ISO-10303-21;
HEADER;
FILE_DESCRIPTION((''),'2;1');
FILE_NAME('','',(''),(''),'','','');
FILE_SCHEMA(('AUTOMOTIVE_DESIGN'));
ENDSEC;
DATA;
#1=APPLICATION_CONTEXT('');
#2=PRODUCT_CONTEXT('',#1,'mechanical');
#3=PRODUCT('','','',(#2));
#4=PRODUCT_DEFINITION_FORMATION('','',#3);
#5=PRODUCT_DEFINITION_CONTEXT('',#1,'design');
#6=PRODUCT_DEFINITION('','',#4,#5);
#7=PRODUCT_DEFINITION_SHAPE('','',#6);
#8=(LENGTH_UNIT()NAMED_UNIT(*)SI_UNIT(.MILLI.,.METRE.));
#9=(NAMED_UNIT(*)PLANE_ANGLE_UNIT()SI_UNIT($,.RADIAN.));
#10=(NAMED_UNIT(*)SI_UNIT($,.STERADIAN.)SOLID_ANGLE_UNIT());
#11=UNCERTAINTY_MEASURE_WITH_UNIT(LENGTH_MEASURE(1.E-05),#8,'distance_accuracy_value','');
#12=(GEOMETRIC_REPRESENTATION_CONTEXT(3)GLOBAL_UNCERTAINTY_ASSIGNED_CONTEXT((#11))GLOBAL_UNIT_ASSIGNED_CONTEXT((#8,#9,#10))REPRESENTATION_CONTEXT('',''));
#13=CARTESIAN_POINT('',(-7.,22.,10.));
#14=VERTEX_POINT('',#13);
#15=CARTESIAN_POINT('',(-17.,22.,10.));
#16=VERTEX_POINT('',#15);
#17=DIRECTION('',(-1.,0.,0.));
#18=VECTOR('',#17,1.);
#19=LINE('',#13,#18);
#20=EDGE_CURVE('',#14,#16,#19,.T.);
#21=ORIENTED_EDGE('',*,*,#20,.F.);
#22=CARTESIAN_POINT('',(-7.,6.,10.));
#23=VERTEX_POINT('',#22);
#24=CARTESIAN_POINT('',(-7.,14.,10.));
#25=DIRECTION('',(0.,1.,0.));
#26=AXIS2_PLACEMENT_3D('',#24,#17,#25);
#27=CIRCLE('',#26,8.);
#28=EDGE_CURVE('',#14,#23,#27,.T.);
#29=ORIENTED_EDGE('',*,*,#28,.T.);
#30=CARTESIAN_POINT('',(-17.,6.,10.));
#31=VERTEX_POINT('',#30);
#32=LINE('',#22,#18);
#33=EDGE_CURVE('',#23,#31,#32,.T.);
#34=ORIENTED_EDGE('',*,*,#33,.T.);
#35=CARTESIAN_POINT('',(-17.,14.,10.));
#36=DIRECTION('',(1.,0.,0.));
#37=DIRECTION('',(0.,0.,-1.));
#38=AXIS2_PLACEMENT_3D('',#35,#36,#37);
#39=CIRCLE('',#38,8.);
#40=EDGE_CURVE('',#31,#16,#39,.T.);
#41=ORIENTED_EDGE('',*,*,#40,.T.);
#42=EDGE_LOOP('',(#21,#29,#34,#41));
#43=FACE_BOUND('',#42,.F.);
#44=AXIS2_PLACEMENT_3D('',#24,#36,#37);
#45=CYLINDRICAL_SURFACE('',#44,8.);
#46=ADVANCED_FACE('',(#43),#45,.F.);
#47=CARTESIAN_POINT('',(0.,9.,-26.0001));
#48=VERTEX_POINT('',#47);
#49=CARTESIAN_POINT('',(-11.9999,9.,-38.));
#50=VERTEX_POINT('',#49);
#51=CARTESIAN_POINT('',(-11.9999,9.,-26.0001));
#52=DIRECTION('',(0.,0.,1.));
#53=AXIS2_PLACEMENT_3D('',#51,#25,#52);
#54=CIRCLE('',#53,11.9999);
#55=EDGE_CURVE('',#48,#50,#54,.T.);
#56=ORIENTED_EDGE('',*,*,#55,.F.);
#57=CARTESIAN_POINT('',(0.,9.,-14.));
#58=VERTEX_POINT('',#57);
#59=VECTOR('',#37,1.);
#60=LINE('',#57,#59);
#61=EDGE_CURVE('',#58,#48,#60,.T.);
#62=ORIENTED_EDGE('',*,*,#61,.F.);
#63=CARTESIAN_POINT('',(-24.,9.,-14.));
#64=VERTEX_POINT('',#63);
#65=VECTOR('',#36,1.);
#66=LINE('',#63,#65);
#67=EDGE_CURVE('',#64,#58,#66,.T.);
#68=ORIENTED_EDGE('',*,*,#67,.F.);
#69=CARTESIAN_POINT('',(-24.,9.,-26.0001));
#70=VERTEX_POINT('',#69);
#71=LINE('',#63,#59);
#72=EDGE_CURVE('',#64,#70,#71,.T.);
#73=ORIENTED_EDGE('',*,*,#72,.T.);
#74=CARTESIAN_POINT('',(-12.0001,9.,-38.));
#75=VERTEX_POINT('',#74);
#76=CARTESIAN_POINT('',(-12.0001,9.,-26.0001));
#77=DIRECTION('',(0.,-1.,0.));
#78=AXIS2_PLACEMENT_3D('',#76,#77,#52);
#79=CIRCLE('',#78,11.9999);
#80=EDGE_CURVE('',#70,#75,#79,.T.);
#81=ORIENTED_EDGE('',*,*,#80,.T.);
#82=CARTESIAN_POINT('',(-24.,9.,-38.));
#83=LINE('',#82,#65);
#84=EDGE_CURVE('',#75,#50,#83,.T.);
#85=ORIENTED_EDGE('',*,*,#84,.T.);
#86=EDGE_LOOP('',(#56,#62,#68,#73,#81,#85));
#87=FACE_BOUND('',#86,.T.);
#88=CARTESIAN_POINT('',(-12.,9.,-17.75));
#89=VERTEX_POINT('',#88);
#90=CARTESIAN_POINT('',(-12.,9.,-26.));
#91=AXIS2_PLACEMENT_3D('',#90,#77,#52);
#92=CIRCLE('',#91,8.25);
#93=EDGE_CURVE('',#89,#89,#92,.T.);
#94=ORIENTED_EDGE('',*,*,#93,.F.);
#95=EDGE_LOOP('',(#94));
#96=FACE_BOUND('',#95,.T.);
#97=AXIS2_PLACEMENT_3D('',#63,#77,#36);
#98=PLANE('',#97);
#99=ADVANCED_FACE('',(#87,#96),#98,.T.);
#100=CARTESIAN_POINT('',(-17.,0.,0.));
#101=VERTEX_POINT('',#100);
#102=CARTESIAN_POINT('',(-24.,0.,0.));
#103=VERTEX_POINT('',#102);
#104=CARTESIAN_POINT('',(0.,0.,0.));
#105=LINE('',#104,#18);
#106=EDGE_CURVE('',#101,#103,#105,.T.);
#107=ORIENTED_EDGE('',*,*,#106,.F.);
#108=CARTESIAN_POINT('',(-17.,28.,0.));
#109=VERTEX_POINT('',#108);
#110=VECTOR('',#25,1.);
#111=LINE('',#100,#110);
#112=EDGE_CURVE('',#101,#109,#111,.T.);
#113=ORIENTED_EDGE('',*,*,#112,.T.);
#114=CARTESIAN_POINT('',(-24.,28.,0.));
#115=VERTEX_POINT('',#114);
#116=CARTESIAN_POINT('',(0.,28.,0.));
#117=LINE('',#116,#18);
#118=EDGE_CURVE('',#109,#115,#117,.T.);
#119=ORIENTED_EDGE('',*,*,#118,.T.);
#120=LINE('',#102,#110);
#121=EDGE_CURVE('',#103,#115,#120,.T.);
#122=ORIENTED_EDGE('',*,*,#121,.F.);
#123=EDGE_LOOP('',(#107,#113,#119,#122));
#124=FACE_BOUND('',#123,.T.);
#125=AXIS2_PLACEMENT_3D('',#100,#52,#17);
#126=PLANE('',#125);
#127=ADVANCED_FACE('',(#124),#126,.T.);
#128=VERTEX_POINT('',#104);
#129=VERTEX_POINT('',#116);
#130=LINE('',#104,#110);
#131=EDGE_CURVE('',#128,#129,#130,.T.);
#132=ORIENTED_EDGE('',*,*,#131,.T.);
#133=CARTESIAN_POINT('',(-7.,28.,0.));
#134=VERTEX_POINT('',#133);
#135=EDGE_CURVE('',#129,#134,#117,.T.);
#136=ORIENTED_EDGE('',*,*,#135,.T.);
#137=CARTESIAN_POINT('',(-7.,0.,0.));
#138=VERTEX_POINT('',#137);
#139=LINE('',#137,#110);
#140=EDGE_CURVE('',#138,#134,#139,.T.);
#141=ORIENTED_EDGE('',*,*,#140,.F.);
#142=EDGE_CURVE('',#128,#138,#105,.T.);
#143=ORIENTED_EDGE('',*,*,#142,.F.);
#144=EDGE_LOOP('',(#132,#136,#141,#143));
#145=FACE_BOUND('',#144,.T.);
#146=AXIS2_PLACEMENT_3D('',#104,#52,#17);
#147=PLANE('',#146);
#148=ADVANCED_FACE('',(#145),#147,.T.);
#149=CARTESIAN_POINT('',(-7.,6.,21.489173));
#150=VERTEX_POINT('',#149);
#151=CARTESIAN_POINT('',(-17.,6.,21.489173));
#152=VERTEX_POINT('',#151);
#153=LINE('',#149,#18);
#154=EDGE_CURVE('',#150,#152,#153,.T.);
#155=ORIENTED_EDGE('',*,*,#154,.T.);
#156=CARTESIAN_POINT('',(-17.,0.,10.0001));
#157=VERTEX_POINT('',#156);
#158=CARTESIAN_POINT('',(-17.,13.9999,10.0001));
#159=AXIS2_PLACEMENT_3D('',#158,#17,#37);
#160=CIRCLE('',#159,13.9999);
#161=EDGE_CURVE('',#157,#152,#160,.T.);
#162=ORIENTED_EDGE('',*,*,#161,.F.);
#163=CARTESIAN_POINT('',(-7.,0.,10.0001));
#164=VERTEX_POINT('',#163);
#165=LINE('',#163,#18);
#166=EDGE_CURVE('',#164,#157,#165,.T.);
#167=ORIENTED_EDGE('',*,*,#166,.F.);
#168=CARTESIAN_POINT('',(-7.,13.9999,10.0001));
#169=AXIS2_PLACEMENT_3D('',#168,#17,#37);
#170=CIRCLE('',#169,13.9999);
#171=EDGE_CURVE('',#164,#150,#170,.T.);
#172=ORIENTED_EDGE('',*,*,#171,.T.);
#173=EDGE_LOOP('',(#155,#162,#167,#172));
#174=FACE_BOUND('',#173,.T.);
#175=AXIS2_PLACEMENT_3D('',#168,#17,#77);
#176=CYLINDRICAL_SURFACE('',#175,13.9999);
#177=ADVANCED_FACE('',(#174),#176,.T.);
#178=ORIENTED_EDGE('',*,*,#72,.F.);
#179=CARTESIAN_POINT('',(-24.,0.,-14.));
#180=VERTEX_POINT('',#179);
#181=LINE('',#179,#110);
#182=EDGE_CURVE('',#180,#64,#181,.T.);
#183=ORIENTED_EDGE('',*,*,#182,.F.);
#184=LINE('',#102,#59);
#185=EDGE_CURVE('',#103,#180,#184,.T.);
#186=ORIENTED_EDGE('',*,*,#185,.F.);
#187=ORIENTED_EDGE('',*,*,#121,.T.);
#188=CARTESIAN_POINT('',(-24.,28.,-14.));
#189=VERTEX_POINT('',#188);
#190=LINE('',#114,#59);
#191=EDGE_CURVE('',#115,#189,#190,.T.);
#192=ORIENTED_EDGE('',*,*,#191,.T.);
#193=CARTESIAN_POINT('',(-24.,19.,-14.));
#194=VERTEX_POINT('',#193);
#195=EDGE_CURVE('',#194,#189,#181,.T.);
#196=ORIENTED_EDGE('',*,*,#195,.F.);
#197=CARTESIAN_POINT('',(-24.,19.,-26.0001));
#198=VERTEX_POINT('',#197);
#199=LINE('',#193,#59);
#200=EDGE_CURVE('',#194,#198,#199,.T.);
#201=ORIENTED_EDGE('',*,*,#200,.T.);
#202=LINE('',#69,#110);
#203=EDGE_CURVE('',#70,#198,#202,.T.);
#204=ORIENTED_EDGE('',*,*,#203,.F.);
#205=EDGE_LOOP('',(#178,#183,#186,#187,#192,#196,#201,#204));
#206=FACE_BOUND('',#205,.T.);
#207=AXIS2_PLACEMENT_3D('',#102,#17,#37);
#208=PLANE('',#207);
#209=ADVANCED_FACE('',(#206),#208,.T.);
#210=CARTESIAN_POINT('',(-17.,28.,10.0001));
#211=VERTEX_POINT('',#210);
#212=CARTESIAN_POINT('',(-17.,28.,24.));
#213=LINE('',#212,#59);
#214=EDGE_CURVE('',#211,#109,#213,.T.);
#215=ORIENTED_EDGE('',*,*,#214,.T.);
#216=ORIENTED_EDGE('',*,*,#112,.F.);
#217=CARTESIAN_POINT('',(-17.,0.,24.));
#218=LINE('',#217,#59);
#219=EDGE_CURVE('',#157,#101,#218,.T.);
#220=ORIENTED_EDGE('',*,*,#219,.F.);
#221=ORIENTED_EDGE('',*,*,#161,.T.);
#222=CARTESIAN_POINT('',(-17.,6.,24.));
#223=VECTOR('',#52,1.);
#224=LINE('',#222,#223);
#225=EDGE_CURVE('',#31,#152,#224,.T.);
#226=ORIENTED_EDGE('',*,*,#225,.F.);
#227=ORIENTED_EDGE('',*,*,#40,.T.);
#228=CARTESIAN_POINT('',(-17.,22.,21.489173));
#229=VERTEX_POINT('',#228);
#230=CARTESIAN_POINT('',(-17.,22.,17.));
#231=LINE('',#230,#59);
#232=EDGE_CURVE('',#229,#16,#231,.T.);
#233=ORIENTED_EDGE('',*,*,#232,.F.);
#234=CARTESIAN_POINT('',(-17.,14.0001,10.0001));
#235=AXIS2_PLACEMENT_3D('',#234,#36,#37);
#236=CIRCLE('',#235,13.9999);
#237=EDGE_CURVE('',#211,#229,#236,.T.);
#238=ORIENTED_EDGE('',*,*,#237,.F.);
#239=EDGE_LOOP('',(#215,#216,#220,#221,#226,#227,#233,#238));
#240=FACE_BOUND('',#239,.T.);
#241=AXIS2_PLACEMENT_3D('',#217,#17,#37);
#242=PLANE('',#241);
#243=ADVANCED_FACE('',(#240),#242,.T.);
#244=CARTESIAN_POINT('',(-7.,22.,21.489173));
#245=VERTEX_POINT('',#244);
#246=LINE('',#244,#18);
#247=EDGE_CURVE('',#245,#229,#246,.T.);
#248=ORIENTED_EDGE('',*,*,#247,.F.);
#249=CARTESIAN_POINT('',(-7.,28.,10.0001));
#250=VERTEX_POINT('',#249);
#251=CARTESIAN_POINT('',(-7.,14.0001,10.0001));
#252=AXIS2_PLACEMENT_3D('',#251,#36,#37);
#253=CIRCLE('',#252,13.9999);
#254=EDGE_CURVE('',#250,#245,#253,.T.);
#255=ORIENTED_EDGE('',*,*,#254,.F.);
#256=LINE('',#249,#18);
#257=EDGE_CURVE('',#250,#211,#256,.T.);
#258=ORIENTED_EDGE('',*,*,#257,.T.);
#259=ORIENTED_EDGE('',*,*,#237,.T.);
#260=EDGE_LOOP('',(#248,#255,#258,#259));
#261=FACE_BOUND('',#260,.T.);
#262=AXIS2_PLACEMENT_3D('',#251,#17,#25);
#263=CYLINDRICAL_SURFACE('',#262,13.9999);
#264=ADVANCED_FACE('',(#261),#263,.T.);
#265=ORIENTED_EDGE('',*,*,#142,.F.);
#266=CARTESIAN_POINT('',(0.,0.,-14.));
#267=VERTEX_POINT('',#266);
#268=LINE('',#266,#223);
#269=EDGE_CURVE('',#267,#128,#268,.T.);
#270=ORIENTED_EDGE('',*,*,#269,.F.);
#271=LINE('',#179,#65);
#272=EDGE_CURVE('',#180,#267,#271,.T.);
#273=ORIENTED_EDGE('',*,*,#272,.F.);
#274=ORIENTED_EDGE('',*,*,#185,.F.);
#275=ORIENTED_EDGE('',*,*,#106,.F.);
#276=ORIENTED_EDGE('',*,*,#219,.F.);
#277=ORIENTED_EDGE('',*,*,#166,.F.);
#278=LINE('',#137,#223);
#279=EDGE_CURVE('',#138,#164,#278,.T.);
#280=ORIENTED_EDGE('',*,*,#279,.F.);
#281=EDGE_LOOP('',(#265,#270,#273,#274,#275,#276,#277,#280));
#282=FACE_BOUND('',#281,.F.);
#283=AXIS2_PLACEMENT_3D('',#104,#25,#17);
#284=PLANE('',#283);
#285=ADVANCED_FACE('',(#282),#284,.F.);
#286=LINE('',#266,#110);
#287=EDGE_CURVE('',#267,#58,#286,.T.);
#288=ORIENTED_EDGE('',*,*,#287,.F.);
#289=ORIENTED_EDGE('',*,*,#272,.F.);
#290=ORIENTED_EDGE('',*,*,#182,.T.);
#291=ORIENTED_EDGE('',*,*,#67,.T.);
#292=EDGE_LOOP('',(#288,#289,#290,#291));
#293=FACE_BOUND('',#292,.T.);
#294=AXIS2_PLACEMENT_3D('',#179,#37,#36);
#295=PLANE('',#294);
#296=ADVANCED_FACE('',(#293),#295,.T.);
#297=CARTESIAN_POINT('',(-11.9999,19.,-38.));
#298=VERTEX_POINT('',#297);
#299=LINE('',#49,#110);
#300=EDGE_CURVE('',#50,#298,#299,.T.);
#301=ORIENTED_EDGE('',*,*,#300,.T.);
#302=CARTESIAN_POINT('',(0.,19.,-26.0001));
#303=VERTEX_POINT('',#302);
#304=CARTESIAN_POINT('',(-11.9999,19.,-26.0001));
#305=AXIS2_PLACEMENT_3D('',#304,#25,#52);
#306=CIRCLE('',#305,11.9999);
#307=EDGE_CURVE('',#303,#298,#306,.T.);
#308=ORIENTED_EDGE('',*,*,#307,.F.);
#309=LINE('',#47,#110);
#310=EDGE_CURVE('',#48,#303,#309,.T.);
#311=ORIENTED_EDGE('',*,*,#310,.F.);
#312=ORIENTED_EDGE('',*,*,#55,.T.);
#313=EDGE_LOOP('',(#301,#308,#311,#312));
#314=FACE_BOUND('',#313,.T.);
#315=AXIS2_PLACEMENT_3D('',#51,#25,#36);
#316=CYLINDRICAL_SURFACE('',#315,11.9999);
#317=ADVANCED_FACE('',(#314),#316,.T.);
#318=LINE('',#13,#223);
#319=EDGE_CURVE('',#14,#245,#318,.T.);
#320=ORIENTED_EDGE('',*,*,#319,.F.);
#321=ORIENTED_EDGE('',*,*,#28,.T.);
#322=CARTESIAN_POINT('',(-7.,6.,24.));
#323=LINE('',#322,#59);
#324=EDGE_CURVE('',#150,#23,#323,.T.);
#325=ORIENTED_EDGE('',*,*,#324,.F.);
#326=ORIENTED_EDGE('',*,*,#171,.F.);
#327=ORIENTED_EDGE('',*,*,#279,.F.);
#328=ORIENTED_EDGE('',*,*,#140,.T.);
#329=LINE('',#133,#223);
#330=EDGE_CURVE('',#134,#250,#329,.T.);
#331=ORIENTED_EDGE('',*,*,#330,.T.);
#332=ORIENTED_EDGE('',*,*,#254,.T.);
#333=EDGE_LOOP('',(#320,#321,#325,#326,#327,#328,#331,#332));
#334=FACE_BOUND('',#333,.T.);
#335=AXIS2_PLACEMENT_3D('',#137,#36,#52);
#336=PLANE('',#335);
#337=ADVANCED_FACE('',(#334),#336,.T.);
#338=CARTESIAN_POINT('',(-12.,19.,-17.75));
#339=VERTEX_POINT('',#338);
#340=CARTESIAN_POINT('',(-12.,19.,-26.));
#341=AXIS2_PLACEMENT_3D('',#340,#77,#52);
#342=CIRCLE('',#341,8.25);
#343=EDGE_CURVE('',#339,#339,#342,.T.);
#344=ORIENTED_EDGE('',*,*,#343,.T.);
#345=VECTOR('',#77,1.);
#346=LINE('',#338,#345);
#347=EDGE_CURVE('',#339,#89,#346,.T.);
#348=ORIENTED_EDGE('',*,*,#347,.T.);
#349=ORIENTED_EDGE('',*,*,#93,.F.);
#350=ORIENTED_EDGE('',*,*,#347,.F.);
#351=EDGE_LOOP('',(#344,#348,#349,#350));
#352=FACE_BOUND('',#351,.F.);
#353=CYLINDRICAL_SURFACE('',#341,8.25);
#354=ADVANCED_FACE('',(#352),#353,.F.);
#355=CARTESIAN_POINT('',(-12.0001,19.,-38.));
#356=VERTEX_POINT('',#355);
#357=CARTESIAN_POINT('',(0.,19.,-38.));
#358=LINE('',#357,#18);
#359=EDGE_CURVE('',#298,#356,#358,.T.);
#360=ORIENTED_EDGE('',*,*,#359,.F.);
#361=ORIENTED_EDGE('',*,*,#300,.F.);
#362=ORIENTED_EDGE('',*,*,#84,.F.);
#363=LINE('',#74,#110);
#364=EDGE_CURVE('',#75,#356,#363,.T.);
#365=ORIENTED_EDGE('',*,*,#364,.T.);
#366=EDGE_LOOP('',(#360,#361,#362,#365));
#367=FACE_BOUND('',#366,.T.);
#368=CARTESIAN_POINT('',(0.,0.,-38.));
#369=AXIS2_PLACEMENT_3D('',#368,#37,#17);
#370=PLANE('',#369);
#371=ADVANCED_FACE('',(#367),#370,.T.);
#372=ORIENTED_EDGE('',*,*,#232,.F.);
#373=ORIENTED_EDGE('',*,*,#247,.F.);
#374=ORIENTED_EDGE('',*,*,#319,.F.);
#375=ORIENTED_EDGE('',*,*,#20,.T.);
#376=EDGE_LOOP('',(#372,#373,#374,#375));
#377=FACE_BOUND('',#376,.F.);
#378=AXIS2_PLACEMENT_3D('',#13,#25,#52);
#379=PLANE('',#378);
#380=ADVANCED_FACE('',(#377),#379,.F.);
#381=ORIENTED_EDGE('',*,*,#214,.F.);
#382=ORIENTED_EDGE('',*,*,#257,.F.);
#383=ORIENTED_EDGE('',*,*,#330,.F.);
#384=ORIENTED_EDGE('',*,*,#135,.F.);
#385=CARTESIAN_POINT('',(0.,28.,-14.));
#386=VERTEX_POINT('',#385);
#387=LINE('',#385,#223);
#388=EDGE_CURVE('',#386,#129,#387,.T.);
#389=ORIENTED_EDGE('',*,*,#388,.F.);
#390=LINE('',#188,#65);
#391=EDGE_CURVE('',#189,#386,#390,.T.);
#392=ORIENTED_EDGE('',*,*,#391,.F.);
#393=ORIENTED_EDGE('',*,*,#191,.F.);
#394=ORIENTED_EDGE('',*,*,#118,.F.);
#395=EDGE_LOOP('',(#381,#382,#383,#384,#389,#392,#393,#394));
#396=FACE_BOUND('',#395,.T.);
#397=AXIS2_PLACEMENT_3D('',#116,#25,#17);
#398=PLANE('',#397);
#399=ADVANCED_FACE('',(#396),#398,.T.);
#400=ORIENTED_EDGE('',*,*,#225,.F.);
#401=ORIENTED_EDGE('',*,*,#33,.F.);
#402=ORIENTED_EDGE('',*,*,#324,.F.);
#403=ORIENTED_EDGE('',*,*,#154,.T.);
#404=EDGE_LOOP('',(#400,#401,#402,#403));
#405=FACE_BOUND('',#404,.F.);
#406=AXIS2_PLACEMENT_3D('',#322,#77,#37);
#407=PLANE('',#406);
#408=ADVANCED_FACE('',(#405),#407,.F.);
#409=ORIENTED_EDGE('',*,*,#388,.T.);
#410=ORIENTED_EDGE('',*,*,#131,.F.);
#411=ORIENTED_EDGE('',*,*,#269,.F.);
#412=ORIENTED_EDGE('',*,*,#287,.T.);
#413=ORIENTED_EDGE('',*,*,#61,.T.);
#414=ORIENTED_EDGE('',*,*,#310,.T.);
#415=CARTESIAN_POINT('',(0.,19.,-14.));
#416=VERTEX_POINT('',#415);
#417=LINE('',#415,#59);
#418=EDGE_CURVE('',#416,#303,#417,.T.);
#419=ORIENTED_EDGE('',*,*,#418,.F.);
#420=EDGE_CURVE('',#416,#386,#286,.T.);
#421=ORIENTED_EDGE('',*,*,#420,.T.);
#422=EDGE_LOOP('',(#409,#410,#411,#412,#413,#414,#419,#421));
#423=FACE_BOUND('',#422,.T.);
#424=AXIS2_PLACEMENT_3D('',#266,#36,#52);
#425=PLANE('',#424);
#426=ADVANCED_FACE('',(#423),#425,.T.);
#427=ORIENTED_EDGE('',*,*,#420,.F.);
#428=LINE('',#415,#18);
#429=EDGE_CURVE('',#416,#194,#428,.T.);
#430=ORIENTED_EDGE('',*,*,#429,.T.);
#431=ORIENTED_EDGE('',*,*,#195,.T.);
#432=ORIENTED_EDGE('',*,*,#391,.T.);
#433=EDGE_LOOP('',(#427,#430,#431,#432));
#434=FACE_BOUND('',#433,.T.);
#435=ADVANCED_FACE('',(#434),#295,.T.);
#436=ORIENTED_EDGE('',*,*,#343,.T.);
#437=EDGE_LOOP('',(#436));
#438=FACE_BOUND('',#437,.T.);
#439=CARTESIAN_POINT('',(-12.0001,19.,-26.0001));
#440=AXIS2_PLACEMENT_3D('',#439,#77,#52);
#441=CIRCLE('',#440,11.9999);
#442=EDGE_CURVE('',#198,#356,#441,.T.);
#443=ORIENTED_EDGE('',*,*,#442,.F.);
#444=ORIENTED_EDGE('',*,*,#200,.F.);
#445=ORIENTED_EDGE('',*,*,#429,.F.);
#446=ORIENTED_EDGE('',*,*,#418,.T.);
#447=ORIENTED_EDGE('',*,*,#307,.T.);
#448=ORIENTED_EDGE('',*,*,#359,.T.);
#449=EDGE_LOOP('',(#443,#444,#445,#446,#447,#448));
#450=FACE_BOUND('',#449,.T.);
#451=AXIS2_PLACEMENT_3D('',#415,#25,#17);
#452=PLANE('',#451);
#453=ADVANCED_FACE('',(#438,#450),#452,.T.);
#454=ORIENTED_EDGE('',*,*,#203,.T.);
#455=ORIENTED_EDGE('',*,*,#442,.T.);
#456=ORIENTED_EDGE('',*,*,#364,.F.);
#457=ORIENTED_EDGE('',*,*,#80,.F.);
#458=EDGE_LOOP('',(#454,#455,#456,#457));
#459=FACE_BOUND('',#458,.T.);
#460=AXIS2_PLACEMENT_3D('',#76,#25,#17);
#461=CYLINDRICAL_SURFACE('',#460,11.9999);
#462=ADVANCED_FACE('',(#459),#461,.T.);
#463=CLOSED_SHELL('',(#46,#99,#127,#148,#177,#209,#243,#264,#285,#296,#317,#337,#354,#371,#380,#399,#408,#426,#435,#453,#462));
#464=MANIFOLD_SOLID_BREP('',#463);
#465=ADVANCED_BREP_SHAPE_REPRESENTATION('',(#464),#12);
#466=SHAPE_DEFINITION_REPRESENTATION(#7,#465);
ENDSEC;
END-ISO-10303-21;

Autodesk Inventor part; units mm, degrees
ref_plane "YZ Plane" through (0, 0, 0) normal (1, 0, 0) x (0, 1, 0)
ref_plane "XZ Plane" through (0, 0, 0) normal (0, 1, 0) x (-1, 0, 0)
ref_plane "XY Plane" through (0, 0, 0) normal (0, 0, 1) x (1, 0, 0)
sketch "Szkic1" plane through (0, 0, 0) normal (0, 1, 0) x (-1, 0, 0)
  line L0 (0, 0) -> (24, 0)
  line L1 (24, 0) -> (24, -14)
  line L2 (24, -14) -> (0, -14)
  line L3 (0, -14) -> (0, 0)
  line L4 (17, 0) -> (7, 0)
  line L5 (7, 0) -> (7, 24)
  line L6 (7, 24) -> (17, 24)
  line L7 (17, 24) -> (17, 0)
  point P0 (7, 0)
  dimension "d0" = 24
  dimension "d1" = 14
  dimension "d2" = 10
  dimension "d3" = 24
  dimension "d4" = 7
extrude "Wyciągnięcie proste1" add sketch "Szkic1" along normal blind 28
fillet "Zaokrąglenie1" radius 14 2 edges at (-12, 28, 24) (-12, 0, 24)
sketch "Szkic2" plane through (-7, 0, 0) normal (1, 0, 0) x (0, 0, -1)
  circle A0 centre (-10, 14) radius 8
  line L0 (-10, 0) -> (0, 0) projected
  line L1 (-10, 22) -> (-24, 22)
  line L2 (-24, 22) -> (-24, 6)
  line L3 (-24, 6) -> (-10, 6)
  line L4 (-10, 6) -> (-10, 22)
  dimension "d8" = 16
  dimension "d9" = 14
extrude "Wyciągnięcie proste2" cut sketch "Szkic2" against normal through all
sketch "Szkic3" plane through (0, 0, -14) normal (0, 0, -1) x (-1, 0, 0)
  line L0 (0, 0) -> (0, 28) projected
  line L1 (24, 0) -> (24, 28) projected
  line L2 (0, 19) -> (24, 19)
  line L3 (24, 19) -> (24, 9)
  line L4 (24, 9) -> (0, 9)
  line L5 (0, 9) -> (0, 19)
  line L6 (0, 28) -> (24, 28) projected
  line L7 (0, 0) -> (24, 0) projected
  point P0 (0, 9)
  dimension "d12" = 9
  dimension "d13" = 9
extrude "Wyciągnięcie proste3" add sketch "Szkic3" along normal blind 24 contours L0 L2 L1 L4
full round fillet "Zaokrąglenie pełne1" first side at (0, 12.3333, -4.6667) centre faces at (-8, 15.6667, -38) second side at (-24, 12.3333, -4.6667)
sketch "Szkic4" plane through (-24, 19, -14) normal (0, 1, 0) x (1, 0, 0)
  arc A0 (24, 12) -> (0, 12) centre (12, 12) ccw projected
  point P0 (24, -14)
hole "Otwór1" at (-12, 19, -26) direction (0, -1, 0) diameter 16.5 end through all
